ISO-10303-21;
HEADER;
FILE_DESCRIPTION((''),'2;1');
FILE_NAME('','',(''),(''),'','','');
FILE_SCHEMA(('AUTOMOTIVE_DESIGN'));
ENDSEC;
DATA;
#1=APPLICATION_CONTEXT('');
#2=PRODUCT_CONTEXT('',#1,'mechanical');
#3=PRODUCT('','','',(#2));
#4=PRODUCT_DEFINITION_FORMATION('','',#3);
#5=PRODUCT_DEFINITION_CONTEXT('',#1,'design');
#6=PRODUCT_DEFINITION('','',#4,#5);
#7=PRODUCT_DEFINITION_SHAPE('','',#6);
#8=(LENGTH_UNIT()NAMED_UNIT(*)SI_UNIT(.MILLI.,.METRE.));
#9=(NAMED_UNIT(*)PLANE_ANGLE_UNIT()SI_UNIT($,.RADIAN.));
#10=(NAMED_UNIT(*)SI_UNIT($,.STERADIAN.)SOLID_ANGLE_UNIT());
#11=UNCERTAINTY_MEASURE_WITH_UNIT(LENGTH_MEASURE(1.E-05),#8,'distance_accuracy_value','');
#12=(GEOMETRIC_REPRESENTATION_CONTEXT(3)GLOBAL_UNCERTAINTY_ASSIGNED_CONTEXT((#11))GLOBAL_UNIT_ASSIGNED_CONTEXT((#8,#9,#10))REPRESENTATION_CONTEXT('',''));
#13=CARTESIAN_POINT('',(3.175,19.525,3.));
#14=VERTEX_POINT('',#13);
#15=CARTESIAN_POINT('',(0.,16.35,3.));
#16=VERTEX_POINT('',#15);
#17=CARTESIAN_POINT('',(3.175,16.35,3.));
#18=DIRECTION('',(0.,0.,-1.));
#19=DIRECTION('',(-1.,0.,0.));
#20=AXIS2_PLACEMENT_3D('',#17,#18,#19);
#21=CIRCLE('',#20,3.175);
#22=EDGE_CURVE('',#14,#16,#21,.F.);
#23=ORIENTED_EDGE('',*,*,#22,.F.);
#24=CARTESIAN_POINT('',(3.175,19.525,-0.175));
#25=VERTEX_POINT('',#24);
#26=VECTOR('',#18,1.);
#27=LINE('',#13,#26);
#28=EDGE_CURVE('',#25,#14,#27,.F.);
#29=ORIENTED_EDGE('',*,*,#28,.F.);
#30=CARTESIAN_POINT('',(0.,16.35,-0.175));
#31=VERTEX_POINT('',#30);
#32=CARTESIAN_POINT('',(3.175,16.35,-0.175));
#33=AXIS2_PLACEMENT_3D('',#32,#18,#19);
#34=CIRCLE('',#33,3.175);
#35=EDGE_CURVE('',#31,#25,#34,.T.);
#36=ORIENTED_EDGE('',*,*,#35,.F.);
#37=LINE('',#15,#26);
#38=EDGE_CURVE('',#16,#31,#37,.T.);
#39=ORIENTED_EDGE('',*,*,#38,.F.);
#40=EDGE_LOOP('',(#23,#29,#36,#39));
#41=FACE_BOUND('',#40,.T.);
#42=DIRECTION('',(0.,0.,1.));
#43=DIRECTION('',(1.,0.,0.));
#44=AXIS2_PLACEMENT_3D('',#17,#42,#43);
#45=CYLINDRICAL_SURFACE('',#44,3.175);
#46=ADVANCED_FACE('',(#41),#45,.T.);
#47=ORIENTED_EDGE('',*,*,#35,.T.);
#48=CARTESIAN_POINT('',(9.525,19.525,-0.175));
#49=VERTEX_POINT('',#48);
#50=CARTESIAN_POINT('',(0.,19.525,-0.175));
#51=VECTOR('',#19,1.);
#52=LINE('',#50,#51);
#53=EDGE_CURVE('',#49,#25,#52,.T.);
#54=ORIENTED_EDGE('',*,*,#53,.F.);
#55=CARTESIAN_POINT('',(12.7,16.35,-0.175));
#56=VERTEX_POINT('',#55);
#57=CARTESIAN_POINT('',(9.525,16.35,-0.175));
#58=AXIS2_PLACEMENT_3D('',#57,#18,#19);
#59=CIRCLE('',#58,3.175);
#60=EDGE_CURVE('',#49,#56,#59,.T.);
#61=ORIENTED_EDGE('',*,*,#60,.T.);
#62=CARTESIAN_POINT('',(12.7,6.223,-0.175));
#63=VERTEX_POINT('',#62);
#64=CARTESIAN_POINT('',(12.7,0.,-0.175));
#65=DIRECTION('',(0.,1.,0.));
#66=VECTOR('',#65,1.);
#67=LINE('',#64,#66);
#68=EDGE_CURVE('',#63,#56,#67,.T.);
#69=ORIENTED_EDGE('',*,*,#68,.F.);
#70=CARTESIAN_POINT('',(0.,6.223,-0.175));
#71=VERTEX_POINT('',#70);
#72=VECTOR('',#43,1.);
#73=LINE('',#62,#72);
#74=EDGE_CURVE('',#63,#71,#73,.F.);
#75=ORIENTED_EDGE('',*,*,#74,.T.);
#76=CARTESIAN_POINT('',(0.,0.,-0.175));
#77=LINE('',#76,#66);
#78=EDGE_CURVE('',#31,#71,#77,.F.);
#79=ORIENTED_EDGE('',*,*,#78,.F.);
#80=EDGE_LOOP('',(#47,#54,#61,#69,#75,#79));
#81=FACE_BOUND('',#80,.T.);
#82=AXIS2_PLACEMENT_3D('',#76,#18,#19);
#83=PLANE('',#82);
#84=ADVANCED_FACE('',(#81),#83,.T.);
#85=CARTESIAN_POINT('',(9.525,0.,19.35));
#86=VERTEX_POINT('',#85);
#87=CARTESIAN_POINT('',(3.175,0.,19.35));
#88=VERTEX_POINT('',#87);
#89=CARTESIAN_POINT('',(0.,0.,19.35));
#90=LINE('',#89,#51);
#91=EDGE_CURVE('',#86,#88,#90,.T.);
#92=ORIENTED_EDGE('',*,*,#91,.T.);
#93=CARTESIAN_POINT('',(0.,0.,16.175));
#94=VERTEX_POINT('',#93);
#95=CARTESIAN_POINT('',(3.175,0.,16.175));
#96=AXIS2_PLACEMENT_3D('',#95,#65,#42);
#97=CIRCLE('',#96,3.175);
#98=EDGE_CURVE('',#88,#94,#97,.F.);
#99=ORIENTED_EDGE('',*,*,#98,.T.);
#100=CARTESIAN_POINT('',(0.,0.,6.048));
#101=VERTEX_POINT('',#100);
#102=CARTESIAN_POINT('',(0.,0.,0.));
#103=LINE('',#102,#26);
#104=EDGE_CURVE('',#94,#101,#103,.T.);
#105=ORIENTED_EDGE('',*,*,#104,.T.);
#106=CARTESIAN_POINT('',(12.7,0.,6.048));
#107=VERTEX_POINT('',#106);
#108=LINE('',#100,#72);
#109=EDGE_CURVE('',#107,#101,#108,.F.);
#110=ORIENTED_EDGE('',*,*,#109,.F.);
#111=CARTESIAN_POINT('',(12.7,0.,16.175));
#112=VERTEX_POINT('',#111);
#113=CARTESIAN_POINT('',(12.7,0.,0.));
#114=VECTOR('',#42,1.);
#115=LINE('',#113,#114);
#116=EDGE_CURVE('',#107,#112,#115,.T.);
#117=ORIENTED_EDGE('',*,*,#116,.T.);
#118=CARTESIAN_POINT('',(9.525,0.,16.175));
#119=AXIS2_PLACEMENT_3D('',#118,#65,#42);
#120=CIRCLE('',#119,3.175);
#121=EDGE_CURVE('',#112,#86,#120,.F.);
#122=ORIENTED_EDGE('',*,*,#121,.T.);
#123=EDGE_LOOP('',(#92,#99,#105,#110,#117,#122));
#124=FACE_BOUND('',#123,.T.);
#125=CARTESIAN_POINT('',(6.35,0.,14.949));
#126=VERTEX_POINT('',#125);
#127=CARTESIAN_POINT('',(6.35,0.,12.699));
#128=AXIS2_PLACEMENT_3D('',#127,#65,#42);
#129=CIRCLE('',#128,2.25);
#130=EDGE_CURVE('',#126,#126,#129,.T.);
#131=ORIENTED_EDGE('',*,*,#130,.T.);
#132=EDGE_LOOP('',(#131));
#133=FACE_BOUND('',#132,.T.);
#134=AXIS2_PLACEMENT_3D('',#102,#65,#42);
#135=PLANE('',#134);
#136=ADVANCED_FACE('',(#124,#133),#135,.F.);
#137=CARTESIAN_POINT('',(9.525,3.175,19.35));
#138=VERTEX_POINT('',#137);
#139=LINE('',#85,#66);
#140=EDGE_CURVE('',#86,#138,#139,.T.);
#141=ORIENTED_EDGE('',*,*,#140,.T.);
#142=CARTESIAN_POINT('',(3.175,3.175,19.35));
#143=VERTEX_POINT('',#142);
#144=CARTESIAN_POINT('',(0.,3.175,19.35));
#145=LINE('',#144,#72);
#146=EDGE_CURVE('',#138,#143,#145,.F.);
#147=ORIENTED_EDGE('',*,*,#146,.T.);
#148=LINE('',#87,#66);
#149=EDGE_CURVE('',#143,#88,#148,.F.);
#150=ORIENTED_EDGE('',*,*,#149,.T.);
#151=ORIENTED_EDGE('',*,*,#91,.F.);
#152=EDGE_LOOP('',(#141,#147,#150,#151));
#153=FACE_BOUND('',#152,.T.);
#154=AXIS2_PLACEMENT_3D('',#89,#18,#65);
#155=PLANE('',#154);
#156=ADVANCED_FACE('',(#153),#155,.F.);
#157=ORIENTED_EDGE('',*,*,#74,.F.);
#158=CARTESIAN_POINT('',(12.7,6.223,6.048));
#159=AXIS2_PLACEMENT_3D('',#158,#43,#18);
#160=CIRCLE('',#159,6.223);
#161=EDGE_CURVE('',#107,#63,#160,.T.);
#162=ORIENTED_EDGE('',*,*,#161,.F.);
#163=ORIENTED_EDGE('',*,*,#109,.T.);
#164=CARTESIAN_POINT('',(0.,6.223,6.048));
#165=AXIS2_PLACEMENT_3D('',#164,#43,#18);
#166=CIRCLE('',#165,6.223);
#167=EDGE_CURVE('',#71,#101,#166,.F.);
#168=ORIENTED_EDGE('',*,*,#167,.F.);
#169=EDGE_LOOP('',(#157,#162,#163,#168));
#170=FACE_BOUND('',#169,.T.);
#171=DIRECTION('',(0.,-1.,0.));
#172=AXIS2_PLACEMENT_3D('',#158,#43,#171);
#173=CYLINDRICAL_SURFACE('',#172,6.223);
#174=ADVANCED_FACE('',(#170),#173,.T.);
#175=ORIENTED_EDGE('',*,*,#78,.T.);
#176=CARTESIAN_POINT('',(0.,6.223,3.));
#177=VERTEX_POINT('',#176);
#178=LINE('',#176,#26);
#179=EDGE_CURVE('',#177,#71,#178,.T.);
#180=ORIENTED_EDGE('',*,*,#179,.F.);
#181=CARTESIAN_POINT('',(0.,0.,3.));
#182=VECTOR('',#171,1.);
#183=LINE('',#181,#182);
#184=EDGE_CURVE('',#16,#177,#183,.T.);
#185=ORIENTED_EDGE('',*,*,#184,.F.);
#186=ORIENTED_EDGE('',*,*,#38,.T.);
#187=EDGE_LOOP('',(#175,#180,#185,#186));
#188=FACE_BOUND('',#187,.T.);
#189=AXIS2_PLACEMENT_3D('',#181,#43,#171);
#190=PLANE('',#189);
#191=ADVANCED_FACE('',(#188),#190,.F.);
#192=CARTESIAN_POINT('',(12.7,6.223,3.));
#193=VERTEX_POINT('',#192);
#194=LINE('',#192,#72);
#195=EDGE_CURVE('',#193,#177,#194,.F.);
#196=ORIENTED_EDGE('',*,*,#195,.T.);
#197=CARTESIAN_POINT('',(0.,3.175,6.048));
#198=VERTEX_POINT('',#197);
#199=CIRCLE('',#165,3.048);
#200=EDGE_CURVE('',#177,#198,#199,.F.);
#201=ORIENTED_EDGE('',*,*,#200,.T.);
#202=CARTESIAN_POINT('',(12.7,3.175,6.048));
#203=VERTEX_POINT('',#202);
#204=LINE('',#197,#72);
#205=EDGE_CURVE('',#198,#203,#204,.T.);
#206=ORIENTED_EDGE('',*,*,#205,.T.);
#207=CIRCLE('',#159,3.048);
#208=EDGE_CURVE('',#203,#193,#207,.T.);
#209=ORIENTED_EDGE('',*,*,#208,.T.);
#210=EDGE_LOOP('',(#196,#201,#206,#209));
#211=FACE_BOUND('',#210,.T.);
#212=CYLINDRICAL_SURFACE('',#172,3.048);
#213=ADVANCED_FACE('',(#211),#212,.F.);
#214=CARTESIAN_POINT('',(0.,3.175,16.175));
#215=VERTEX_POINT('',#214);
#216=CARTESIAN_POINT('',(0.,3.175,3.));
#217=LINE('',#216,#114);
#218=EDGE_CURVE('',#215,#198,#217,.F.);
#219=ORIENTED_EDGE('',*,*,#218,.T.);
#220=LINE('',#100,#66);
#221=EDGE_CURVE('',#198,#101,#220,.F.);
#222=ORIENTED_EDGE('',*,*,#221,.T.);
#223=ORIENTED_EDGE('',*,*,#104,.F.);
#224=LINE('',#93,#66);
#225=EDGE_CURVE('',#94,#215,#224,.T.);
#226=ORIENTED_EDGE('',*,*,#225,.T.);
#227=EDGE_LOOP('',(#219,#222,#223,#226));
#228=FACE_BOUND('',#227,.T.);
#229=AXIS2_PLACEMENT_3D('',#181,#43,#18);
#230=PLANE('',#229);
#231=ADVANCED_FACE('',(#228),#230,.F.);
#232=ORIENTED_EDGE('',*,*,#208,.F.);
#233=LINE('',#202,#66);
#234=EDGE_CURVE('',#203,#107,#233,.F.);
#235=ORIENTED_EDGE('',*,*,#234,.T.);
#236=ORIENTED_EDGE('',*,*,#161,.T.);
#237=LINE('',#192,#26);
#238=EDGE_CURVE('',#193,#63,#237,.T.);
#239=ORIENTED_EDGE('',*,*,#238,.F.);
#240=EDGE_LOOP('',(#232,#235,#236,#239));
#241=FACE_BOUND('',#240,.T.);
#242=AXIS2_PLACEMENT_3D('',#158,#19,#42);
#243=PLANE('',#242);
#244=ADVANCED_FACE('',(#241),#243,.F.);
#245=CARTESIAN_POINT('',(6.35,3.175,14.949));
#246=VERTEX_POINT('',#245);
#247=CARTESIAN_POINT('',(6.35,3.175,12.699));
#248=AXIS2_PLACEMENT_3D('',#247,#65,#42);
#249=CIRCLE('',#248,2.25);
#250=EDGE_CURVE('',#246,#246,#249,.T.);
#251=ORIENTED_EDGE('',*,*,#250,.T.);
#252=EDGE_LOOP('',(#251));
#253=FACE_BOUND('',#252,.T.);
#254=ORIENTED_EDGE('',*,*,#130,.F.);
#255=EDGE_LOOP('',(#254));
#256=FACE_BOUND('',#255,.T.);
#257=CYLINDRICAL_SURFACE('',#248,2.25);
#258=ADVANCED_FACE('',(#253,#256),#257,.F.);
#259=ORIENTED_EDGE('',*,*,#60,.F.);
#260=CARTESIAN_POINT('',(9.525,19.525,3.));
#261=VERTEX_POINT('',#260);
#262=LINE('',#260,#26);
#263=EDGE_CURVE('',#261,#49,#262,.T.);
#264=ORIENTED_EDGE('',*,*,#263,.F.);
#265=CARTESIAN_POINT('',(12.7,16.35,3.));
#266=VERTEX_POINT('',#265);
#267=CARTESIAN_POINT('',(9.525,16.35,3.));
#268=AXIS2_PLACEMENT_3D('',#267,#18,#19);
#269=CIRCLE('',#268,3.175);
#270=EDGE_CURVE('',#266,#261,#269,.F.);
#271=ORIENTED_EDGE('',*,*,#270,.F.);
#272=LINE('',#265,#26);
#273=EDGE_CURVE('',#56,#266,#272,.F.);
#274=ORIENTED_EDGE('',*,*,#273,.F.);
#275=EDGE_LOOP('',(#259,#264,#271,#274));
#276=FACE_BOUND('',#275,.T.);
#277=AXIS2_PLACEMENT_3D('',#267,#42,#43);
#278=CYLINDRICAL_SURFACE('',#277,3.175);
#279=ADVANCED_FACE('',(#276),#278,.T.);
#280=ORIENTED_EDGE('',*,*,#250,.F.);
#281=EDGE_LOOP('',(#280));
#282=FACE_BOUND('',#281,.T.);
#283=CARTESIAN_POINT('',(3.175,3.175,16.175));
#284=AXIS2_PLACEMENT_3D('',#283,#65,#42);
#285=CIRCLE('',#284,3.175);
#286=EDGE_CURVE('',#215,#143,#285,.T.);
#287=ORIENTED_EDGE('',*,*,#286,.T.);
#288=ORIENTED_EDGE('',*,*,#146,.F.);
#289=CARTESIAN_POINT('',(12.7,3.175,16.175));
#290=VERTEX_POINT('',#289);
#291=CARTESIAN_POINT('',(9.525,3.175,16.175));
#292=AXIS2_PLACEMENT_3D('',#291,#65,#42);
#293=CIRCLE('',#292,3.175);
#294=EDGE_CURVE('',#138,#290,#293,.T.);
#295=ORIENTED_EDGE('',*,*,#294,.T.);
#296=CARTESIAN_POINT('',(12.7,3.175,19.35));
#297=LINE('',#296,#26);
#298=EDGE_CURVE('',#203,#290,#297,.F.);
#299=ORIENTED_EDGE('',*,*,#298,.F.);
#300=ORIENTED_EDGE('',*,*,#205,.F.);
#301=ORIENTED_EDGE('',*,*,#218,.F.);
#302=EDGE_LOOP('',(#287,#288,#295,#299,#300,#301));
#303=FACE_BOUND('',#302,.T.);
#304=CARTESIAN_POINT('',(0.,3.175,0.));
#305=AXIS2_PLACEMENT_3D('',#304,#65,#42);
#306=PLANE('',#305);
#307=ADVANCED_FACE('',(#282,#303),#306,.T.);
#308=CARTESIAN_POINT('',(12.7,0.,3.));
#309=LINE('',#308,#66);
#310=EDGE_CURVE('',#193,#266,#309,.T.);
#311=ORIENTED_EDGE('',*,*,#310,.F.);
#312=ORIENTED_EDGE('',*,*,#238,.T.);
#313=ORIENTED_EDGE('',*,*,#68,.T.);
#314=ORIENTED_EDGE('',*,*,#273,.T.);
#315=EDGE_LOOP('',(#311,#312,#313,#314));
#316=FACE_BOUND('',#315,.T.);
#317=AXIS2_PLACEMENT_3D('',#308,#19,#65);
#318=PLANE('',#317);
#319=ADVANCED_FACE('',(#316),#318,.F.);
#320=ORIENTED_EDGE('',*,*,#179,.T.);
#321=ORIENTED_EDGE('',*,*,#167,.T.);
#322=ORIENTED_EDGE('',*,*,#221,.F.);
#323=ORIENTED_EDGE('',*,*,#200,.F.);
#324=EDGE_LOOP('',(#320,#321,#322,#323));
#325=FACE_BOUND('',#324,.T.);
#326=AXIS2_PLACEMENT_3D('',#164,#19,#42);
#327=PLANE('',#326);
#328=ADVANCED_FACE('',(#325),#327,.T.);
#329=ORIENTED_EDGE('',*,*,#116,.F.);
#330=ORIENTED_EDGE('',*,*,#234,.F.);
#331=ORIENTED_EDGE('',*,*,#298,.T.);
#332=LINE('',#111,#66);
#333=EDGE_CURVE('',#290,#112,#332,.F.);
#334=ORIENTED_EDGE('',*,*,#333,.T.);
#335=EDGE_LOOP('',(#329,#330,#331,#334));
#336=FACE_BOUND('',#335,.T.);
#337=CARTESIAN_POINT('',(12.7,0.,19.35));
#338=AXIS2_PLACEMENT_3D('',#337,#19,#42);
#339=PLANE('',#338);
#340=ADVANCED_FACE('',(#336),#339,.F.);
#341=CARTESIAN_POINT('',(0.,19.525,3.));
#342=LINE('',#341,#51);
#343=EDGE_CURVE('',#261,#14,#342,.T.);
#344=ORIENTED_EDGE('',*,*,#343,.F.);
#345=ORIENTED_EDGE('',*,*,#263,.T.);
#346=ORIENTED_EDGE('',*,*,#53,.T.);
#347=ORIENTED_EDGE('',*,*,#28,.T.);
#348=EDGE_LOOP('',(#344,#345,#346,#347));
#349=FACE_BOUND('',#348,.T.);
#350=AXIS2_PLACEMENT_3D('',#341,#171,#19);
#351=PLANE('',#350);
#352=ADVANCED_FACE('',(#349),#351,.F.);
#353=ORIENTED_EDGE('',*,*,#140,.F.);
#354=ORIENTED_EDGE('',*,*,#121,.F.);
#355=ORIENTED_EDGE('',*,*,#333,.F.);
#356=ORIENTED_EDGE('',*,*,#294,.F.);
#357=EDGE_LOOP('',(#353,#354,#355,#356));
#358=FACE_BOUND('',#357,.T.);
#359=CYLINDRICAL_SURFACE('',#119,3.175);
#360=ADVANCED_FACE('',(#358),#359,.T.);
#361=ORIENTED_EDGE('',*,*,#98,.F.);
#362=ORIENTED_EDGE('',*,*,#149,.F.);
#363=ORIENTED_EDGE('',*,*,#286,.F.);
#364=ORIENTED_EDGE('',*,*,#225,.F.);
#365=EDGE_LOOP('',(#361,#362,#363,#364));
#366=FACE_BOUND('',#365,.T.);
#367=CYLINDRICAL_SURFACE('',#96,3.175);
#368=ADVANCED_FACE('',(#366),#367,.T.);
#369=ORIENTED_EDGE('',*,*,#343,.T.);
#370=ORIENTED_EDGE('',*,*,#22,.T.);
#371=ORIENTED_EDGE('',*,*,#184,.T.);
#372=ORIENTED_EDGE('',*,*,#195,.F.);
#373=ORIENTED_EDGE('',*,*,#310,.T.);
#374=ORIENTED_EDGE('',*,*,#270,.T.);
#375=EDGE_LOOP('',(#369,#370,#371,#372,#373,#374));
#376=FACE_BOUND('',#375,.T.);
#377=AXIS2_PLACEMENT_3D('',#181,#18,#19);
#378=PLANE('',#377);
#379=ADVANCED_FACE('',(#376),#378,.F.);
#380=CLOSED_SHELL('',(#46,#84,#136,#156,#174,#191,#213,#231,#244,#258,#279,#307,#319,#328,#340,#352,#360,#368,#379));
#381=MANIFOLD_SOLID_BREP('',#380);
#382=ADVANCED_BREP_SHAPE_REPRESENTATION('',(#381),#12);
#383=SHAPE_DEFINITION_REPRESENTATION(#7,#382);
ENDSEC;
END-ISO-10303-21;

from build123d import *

# Parameters (mm, degrees)
SKETCH1_W                    = 12.7
SKETCH1_H                    = 19.525000066
BOSS_EXTRUDE1_DEPTH          = 3
CONVERT_SOLID2_START         = -0.175
CONVERT_SOLID2_OUTLINE_W     = 12.7
CONVERT_SOLID2_OUTLINE_H     = 19.525000066
CONVERT_SOLID2_DEPTH         = 0.175
EDGE_FLANGE1_STRIP_W         = 18.796
EDGE_FLANGE1_STRIP_H         = 3.175
EDGE_FLANGE1_STRIP_CUT_DEPTH = 12.7
EDGE_FLANGE1_DEPTH           = 12.7
M4_CLEARANCE_HOLE4_D         = 4.5
M4_CLEARANCE_HOLE4_DEPTH     = 16.002
M4_CLEARANCE_HOLE4_TIP       = 1.351936393
FILLET1_R                    = 3.175


# Read off the part's stored shape, not the designer's step: Convert-Solid2
# Sheet-metal steps are written as plain solids
with BuildPart() as part:
    # Sketch1 → Boss-Extrude1 (new body)
    with BuildSketch(Plane.XY):
        with Locations((6.35, 9.762500033)):
            Rectangle(SKETCH1_W, SKETCH1_H)
    extrude(amount=BOSS_EXTRUDE1_DEPTH)

    # Convert-Solid2 outline → Convert-Solid2 (add)
    with BuildSketch(Plane.XY.offset(CONVERT_SOLID2_START)):
        with Locations((6.35, 9.762500033)):
            Rectangle(CONVERT_SOLID2_OUTLINE_W, CONVERT_SOLID2_OUTLINE_H)
    extrude(amount=CONVERT_SOLID2_DEPTH)

    # Edge-Flange1 strip (across the edge) → Edge-Flange1 strip cut (cut)
    with BuildSketch(Plane(origin=(0, 0, 3), x_dir=(0, 1, 0), z_dir=(1, 0, 0))):
        with Locations((-3.175, -1.5875)):
            Rectangle(EDGE_FLANGE1_STRIP_W, EDGE_FLANGE1_STRIP_H)
    extrude(amount=EDGE_FLANGE1_STRIP_CUT_DEPTH, mode=Mode.SUBTRACT)

    # Edge-Flange1 section (across the edge) → Edge-Flange1 (add)
    with BuildSketch(Plane(origin=(0, 0, 3), x_dir=(0, 1, 0), z_dir=(1, 0, 0))):
        with BuildLine():
            Line((0, 3.048), (0, 16.350000066))
            Line((0, 16.350000066), (3.175, 16.350000066))
            Line((3.175, 16.350000066), (3.175, 3.048))
            ThreePointArc((3.175, 3.048), (4.067738531, 0.892738531), (6.223, 0))
            Line((6.223, 0), (6.223, -3.175))
            ThreePointArc((6.223, -3.175), (1.822674501, -1.352325499), (0, 3.048))
        make_face()
    extrude(amount=EDGE_FLANGE1_DEPTH)

    # M4 Clearance Hole4
    with Locations(Plane(origin=(0, 3.175, 0), x_dir=(1, 0, 0), z_dir=(0, 1, 0))):
        with Locations((6.35, -12.699000033)):
            Hole(M4_CLEARANCE_HOLE4_D / 2, depth=M4_CLEARANCE_HOLE4_DEPTH)
            with Locations((0, 0, -(M4_CLEARANCE_HOLE4_DEPTH + M4_CLEARANCE_HOLE4_TIP / 2))):  # 118° drill point
                Cone(0, M4_CLEARANCE_HOLE4_D / 2, M4_CLEARANCE_HOLE4_TIP, mode=Mode.SUBTRACT)

    # Fillet1
    fillet1_edges = [part.edges().sort_by_distance(p)[0] for p in [
        (0, 1.5875, 19.350000066),
        (12.7, 1.5875, 19.350000066),
        (0, 19.525000066, 1.4125),
        (12.7, 19.525000066, 1.4125),
    ]]
    fillet(fillet1_edges, radius=FILLET1_R)


solid = part.part
